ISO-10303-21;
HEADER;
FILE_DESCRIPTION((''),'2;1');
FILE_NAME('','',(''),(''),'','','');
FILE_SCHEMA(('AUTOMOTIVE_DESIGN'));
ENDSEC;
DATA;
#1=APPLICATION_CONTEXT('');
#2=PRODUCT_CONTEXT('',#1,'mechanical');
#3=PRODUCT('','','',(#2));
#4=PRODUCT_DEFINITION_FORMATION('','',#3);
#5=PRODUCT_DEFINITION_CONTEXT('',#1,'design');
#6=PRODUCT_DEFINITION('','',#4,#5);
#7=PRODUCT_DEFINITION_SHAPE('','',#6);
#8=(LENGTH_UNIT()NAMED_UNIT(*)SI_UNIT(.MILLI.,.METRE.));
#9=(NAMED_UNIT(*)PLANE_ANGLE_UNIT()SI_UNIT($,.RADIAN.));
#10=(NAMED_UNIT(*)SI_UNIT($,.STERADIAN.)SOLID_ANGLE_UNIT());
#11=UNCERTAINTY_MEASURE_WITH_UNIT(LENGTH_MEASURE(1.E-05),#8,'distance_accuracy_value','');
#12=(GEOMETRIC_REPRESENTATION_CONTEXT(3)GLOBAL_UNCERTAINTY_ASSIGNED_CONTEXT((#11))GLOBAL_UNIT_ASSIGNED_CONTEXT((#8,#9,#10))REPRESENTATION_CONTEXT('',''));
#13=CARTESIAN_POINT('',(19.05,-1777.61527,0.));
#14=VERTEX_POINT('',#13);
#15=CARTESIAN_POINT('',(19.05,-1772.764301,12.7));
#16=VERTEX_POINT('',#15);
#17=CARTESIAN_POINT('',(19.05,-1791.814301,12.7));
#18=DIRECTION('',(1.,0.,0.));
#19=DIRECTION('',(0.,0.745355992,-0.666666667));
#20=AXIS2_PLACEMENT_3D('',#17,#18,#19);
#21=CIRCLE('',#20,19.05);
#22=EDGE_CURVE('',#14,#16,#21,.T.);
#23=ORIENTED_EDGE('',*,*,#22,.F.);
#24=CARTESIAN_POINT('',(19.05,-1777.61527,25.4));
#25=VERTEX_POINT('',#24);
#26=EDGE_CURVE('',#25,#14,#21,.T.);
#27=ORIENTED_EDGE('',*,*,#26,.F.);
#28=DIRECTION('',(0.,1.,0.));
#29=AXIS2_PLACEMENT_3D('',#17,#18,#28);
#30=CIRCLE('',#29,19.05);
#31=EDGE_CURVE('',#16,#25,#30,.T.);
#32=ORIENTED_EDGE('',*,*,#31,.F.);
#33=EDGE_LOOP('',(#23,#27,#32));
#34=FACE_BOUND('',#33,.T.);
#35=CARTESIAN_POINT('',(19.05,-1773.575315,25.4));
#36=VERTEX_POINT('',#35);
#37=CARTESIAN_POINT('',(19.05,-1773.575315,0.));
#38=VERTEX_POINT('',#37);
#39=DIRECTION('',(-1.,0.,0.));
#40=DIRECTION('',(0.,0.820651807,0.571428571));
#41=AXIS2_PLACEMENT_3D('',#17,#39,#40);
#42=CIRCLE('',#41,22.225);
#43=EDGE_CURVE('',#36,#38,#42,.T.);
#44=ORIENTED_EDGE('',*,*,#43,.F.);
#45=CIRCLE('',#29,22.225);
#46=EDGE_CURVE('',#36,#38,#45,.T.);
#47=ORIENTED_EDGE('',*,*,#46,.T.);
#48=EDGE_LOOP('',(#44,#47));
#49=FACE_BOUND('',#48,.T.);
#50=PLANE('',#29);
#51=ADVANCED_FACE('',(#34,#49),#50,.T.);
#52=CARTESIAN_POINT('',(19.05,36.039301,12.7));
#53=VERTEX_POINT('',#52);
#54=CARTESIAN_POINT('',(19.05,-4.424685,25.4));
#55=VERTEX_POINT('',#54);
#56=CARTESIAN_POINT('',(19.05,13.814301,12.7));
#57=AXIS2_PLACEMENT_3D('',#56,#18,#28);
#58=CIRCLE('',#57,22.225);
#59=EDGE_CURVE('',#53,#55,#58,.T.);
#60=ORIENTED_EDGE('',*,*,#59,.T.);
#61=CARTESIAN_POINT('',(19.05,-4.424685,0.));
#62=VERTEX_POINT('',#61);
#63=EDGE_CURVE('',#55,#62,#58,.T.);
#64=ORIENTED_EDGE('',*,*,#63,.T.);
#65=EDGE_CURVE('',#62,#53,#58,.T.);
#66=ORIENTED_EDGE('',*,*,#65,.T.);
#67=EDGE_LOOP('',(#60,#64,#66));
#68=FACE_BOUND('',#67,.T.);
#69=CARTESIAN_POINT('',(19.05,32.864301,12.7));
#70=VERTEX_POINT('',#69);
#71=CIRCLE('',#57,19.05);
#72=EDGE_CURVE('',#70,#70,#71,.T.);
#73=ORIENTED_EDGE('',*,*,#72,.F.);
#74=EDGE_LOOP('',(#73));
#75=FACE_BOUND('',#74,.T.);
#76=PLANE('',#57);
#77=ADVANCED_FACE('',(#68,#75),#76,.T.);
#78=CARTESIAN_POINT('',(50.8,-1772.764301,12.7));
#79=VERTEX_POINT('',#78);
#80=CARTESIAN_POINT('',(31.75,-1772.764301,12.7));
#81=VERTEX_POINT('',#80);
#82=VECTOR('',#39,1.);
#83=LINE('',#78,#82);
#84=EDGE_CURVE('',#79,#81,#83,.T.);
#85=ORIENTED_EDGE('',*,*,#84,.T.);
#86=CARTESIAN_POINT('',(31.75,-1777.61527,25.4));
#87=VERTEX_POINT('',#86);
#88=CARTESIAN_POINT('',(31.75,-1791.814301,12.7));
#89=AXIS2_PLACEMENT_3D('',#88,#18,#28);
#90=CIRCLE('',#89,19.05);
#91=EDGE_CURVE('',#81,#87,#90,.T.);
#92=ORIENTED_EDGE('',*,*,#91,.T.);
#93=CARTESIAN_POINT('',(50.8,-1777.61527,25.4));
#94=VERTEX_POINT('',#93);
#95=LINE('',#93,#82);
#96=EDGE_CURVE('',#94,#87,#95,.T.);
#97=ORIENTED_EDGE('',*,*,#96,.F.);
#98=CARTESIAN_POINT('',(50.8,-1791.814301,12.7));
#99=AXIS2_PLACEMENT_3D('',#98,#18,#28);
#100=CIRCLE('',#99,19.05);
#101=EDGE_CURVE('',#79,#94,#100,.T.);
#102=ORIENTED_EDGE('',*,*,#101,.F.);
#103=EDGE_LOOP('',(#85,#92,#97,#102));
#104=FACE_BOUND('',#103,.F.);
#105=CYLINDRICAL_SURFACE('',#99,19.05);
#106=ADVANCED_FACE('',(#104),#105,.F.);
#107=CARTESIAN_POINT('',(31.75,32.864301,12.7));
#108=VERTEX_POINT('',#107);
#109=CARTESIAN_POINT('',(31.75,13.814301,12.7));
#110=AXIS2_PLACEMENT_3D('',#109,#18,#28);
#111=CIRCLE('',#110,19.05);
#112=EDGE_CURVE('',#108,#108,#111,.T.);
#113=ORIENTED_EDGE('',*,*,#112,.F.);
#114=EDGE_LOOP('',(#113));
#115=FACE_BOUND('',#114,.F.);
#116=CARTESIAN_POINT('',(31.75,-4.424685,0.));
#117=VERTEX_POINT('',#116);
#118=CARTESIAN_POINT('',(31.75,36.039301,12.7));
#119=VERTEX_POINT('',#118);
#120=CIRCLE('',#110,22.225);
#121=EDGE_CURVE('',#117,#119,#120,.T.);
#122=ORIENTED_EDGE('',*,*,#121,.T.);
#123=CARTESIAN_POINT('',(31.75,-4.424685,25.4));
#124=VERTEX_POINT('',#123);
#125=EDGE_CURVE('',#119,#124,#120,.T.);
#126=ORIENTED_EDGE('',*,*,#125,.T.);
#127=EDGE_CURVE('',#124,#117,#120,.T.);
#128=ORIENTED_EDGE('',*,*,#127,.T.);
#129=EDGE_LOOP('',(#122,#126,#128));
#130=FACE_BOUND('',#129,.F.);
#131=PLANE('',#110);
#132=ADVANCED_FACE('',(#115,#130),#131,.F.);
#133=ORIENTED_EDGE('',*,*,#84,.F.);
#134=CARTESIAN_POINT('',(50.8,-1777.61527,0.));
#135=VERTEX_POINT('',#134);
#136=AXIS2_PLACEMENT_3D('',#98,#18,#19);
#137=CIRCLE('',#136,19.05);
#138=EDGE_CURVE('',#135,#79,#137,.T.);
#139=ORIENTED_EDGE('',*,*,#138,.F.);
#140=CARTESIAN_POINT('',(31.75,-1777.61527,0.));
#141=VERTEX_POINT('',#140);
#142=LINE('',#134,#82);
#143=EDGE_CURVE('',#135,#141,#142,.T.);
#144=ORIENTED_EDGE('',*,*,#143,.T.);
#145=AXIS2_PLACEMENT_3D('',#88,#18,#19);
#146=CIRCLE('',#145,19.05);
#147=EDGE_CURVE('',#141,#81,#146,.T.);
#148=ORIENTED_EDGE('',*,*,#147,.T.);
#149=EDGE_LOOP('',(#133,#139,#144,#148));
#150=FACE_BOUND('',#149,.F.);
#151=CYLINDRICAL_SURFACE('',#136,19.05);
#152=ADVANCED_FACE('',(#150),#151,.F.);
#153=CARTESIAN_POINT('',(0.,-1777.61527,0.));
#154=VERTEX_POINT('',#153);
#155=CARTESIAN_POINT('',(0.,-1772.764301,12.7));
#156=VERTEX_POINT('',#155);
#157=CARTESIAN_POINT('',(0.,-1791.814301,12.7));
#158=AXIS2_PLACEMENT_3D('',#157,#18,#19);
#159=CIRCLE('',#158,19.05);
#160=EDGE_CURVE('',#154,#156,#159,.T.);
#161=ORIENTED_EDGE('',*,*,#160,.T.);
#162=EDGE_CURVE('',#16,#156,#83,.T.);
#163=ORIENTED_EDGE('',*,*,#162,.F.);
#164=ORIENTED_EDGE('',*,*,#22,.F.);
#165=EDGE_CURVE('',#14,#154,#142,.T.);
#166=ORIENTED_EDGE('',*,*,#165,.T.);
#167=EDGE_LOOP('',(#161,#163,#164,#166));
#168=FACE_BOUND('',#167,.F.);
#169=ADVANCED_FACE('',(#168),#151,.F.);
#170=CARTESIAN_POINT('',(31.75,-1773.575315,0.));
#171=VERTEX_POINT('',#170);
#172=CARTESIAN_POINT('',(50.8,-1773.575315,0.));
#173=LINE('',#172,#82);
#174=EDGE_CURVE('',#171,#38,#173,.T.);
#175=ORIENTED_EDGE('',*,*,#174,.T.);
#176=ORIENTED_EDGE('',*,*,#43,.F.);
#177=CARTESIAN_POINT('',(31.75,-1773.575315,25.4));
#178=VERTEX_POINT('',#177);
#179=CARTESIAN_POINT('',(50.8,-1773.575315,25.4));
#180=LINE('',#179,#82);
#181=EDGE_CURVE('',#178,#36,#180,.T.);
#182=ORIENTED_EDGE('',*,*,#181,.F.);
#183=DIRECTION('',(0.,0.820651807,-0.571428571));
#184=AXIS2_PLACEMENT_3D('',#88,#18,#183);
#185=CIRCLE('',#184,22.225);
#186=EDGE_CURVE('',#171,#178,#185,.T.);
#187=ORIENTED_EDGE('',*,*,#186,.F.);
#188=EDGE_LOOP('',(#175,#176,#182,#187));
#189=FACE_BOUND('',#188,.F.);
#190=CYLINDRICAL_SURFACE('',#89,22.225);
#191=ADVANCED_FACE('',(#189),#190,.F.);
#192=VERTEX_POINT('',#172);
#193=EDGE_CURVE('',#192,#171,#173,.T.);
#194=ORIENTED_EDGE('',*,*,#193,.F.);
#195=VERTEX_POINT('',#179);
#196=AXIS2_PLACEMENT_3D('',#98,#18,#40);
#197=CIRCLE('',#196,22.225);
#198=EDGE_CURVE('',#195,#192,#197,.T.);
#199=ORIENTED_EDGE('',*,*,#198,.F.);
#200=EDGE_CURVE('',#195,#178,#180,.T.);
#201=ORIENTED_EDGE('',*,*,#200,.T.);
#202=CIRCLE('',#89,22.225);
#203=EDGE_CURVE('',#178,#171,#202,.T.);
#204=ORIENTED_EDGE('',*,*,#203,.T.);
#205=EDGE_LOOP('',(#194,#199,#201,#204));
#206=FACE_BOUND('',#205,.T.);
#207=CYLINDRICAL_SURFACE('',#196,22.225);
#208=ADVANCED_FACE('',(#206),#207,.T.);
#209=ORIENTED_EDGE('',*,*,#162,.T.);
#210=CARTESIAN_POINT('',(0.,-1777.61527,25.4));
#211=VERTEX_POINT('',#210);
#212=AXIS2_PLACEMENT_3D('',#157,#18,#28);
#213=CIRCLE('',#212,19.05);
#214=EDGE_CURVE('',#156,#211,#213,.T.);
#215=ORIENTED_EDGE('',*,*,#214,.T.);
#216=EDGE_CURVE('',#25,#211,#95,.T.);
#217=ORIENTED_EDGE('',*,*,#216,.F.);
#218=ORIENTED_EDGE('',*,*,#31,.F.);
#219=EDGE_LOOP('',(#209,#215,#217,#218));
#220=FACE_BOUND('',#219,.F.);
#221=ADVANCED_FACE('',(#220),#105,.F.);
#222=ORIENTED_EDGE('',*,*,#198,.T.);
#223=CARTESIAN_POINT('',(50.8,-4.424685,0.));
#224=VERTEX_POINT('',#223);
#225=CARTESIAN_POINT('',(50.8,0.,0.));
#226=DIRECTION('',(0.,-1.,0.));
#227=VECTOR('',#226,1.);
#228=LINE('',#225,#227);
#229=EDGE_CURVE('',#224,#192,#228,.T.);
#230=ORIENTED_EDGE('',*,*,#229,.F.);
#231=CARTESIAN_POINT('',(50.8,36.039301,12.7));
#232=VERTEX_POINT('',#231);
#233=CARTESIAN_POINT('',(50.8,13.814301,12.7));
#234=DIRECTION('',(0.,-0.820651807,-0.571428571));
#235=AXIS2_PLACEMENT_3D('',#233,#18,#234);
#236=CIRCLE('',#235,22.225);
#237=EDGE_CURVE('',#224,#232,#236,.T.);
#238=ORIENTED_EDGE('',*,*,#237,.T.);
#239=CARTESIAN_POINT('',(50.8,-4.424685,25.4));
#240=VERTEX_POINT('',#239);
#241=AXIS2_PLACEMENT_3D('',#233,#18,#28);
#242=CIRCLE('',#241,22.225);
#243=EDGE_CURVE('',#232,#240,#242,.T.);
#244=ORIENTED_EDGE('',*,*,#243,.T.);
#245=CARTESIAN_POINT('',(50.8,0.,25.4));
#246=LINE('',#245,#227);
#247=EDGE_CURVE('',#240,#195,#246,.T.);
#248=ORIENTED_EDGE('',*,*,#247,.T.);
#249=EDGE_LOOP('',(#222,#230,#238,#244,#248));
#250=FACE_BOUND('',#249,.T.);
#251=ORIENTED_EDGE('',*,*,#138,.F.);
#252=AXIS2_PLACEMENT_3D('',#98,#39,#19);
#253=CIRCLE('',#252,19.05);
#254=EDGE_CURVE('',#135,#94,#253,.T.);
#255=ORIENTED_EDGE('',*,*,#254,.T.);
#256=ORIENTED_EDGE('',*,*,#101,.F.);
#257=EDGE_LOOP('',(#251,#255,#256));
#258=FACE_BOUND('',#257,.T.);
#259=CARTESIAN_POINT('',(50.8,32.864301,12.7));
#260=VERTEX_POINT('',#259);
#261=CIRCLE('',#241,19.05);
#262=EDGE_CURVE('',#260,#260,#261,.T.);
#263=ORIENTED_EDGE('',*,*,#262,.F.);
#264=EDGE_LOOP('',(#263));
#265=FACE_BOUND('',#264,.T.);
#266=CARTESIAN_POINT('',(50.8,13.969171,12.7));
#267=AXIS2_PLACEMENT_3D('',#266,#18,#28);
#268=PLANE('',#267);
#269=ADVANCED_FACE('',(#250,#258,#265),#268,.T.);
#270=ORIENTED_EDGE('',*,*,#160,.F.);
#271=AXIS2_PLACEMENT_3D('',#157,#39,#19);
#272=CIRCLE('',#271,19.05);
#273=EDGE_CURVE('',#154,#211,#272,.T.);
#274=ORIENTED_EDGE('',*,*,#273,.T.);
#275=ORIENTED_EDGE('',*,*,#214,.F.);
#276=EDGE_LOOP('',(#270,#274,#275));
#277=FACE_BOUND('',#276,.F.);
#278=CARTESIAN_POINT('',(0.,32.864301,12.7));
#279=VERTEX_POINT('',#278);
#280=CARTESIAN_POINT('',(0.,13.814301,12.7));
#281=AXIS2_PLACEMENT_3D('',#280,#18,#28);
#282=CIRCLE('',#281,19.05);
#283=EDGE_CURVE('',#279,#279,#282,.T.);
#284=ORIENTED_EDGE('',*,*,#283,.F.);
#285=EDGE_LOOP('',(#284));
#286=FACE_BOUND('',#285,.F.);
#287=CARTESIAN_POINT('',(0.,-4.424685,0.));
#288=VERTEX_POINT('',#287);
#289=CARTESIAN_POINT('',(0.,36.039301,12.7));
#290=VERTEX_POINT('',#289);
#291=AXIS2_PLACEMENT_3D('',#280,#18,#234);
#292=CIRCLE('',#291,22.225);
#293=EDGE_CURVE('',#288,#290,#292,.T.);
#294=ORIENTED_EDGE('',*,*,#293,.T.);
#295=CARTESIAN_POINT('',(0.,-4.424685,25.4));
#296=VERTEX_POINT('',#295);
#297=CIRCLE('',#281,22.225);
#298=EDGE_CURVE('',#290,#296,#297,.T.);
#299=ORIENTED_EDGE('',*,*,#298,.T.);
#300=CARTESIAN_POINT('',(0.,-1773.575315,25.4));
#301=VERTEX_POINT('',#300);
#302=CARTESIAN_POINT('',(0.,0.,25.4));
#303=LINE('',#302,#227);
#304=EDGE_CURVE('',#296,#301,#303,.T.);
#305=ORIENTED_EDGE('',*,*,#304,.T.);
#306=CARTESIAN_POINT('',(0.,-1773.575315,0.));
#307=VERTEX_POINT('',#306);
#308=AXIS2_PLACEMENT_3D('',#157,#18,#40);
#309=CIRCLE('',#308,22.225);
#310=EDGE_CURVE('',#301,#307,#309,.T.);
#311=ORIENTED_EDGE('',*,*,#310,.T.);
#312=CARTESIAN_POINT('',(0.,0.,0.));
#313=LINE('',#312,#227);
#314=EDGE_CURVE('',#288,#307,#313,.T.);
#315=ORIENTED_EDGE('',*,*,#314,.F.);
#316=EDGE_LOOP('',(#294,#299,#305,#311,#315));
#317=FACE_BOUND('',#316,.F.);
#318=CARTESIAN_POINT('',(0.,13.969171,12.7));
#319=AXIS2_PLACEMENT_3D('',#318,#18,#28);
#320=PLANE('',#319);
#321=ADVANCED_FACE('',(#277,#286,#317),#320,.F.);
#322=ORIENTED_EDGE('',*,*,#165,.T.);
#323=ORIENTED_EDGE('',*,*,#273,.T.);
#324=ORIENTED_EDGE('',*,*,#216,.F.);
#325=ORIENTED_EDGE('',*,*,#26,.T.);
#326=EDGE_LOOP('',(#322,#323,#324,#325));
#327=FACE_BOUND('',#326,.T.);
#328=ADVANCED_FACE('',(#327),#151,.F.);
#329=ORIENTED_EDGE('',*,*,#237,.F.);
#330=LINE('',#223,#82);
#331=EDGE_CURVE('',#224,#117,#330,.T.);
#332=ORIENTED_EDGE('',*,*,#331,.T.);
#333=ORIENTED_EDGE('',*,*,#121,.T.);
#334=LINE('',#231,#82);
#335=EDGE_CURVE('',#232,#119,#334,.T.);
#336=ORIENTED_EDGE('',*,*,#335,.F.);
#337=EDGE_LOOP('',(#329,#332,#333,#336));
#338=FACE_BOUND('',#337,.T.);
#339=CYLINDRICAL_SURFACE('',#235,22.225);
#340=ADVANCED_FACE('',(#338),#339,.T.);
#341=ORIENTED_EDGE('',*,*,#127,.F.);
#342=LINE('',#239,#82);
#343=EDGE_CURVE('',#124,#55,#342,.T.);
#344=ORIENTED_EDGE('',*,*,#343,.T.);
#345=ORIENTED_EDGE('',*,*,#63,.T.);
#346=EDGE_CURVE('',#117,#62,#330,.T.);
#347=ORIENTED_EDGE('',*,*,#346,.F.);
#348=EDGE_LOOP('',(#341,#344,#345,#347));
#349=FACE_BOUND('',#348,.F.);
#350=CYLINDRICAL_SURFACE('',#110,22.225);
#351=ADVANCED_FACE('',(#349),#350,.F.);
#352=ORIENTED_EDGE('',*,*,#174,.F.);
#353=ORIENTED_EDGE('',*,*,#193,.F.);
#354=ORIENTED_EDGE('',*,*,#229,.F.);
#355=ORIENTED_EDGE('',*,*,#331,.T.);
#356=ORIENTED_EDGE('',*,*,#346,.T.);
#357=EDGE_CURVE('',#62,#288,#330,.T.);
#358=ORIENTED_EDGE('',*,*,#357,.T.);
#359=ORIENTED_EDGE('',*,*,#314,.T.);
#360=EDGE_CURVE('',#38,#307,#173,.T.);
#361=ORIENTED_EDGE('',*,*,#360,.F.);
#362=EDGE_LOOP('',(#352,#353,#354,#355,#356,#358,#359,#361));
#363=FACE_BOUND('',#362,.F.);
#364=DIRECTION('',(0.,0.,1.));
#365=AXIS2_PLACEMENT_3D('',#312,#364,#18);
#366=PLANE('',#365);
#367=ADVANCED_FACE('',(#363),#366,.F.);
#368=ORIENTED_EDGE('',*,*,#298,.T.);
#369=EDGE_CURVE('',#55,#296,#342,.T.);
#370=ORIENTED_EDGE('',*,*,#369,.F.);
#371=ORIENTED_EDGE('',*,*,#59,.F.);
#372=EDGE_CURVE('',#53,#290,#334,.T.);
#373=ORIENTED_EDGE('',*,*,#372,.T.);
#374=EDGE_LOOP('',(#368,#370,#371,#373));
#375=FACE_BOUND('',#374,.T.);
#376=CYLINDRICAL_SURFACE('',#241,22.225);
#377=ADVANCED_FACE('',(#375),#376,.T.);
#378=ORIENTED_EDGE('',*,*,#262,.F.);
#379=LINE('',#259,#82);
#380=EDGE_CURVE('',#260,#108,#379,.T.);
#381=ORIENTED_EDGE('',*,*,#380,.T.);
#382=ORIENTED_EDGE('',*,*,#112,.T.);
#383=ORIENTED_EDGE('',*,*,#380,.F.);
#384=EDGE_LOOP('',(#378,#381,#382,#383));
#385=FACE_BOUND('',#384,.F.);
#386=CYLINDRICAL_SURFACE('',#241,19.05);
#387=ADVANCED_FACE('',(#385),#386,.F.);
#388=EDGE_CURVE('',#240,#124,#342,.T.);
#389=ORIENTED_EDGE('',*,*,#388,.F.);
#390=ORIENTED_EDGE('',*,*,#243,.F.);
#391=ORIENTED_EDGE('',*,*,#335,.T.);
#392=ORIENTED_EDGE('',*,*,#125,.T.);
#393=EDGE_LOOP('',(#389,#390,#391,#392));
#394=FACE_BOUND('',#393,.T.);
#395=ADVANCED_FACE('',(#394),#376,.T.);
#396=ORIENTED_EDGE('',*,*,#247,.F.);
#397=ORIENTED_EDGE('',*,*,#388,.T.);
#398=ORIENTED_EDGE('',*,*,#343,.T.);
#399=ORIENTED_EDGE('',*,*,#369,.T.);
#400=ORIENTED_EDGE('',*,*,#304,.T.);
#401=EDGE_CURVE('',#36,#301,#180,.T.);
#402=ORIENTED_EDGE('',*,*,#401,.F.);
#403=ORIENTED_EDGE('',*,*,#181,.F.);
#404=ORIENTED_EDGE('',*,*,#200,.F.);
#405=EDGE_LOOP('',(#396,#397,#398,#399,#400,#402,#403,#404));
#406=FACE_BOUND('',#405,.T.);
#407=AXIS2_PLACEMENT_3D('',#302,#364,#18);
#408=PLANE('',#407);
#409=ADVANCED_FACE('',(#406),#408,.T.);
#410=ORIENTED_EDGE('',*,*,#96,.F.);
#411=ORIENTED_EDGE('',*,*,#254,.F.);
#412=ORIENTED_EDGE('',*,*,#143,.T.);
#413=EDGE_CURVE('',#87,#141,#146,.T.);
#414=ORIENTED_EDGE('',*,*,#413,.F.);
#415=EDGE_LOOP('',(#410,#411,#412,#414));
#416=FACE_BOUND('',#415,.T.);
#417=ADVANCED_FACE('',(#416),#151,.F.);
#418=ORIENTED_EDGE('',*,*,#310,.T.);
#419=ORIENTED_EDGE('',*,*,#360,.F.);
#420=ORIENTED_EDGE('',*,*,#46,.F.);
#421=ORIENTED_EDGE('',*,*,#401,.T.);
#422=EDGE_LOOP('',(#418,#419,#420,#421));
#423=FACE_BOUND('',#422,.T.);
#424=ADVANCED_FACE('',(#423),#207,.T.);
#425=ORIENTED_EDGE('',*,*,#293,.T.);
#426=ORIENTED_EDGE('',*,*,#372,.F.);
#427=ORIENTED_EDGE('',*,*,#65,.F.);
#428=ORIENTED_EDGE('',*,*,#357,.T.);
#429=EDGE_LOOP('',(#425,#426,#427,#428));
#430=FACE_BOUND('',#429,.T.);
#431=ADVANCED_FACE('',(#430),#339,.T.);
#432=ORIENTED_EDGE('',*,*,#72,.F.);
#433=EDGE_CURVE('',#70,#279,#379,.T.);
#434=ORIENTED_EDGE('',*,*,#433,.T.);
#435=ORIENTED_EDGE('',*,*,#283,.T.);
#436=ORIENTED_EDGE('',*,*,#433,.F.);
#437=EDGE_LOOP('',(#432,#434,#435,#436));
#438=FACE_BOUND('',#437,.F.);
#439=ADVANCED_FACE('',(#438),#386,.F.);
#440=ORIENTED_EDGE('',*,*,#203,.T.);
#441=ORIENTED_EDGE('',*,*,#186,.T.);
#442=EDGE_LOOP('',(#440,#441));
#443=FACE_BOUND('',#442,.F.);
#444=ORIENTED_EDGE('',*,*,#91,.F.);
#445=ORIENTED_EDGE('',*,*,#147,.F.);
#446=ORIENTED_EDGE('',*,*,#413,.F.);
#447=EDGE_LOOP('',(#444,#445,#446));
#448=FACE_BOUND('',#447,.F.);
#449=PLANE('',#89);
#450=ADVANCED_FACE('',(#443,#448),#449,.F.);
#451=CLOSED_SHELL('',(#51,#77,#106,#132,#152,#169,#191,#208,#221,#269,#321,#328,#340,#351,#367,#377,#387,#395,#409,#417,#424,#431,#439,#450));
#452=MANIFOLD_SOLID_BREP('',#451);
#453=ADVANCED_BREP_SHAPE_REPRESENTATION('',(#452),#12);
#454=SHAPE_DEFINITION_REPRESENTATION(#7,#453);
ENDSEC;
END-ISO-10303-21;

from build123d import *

# Parameters (mm, degrees)
F0_W     = 50.8
F0_H     = 25.4
F1_DEPTH = 1778
F6_DEPTH = 50.8
F4_R     = 22.225
F7_DEPTH = 12.7
F8_R     = 19.05
F9_DEPTH = 50.8


with BuildPart() as f1:
    # F0 (on Front) → F1 (new body)
    with BuildSketch(Plane.XZ):
        with Locations((25.4, 12.7)):
            Rectangle(F0_W, F0_H)
    extrude(amount=F1_DEPTH)

    # F5 (on face) → F6 (join)
    with BuildSketch(Plane.YZ.offset(50.8)):
        with BuildLine():
            ThreePointArc((36.0393014908, 12.7), (20.46971854, 33.9050948807), (-4.424684912, 25.4))
            Line((-4.424684912, 25.4), (0, 25.4))
            Line((0, 25.4), (0, 0))
            Line((0, 0), (-4.424684912, 0))
            ThreePointArc((-4.424684912, 0), (20.46971854, -8.5050948807), (36.0393014908, 12.7))
        make_face()
        with BuildLine():
            Line((-1777.6152698337, 25.4), (-1773.575315088, 25.4))
            ThreePointArc((-1773.575315088, 25.4), (-1814.0393014908, 12.7), (-1773.575315088, 0))
            Line((-1773.575315088, 0), (-1777.6152698337, 0))
            ThreePointArc((-1777.6152698337, 0), (-1810.8643014908, 12.7), (-1777.6152698337, 25.4))
        make_face()
    extrude(amount=-F6_DEPTH)

    # F4 (on offset) → F7 (cut)
    with BuildSketch(Plane.YZ.offset(31.75)):
        with Locations((-1791.8143014908, 12.7)):
            Circle(F4_R)
        with Locations((13.8143014908, 12.7)):
            Circle(F4_R)
    extrude(amount=-F7_DEPTH, mode=Mode.SUBTRACT)

    # F8 (on face) → F9 (cut)
    with BuildSketch(Plane.YZ.offset(50.8)):
        with BuildLine():
            ThreePointArc((-1777.6152698337, 0), (-1774.0183180525, 5.9025391898), (-1772.7643014908, 12.7))
            ThreePointArc((-1772.7643014908, 12.7), (-1774.0183180525, 19.4974608102), (-1777.6152698337, 25.4))
            Line((-1777.6152698337, 25.4), (-1778, 25.4))
            Line((-1778, 25.4), (-1778, 0))
            Line((-1778, 0), (-1777.6152698337, 0))
        make_face()
        with Locations((13.8143014908, 12.7)):
            Circle(F8_R)
    extrude(amount=-F9_DEPTH, mode=Mode.SUBTRACT)


solid = f1.part
